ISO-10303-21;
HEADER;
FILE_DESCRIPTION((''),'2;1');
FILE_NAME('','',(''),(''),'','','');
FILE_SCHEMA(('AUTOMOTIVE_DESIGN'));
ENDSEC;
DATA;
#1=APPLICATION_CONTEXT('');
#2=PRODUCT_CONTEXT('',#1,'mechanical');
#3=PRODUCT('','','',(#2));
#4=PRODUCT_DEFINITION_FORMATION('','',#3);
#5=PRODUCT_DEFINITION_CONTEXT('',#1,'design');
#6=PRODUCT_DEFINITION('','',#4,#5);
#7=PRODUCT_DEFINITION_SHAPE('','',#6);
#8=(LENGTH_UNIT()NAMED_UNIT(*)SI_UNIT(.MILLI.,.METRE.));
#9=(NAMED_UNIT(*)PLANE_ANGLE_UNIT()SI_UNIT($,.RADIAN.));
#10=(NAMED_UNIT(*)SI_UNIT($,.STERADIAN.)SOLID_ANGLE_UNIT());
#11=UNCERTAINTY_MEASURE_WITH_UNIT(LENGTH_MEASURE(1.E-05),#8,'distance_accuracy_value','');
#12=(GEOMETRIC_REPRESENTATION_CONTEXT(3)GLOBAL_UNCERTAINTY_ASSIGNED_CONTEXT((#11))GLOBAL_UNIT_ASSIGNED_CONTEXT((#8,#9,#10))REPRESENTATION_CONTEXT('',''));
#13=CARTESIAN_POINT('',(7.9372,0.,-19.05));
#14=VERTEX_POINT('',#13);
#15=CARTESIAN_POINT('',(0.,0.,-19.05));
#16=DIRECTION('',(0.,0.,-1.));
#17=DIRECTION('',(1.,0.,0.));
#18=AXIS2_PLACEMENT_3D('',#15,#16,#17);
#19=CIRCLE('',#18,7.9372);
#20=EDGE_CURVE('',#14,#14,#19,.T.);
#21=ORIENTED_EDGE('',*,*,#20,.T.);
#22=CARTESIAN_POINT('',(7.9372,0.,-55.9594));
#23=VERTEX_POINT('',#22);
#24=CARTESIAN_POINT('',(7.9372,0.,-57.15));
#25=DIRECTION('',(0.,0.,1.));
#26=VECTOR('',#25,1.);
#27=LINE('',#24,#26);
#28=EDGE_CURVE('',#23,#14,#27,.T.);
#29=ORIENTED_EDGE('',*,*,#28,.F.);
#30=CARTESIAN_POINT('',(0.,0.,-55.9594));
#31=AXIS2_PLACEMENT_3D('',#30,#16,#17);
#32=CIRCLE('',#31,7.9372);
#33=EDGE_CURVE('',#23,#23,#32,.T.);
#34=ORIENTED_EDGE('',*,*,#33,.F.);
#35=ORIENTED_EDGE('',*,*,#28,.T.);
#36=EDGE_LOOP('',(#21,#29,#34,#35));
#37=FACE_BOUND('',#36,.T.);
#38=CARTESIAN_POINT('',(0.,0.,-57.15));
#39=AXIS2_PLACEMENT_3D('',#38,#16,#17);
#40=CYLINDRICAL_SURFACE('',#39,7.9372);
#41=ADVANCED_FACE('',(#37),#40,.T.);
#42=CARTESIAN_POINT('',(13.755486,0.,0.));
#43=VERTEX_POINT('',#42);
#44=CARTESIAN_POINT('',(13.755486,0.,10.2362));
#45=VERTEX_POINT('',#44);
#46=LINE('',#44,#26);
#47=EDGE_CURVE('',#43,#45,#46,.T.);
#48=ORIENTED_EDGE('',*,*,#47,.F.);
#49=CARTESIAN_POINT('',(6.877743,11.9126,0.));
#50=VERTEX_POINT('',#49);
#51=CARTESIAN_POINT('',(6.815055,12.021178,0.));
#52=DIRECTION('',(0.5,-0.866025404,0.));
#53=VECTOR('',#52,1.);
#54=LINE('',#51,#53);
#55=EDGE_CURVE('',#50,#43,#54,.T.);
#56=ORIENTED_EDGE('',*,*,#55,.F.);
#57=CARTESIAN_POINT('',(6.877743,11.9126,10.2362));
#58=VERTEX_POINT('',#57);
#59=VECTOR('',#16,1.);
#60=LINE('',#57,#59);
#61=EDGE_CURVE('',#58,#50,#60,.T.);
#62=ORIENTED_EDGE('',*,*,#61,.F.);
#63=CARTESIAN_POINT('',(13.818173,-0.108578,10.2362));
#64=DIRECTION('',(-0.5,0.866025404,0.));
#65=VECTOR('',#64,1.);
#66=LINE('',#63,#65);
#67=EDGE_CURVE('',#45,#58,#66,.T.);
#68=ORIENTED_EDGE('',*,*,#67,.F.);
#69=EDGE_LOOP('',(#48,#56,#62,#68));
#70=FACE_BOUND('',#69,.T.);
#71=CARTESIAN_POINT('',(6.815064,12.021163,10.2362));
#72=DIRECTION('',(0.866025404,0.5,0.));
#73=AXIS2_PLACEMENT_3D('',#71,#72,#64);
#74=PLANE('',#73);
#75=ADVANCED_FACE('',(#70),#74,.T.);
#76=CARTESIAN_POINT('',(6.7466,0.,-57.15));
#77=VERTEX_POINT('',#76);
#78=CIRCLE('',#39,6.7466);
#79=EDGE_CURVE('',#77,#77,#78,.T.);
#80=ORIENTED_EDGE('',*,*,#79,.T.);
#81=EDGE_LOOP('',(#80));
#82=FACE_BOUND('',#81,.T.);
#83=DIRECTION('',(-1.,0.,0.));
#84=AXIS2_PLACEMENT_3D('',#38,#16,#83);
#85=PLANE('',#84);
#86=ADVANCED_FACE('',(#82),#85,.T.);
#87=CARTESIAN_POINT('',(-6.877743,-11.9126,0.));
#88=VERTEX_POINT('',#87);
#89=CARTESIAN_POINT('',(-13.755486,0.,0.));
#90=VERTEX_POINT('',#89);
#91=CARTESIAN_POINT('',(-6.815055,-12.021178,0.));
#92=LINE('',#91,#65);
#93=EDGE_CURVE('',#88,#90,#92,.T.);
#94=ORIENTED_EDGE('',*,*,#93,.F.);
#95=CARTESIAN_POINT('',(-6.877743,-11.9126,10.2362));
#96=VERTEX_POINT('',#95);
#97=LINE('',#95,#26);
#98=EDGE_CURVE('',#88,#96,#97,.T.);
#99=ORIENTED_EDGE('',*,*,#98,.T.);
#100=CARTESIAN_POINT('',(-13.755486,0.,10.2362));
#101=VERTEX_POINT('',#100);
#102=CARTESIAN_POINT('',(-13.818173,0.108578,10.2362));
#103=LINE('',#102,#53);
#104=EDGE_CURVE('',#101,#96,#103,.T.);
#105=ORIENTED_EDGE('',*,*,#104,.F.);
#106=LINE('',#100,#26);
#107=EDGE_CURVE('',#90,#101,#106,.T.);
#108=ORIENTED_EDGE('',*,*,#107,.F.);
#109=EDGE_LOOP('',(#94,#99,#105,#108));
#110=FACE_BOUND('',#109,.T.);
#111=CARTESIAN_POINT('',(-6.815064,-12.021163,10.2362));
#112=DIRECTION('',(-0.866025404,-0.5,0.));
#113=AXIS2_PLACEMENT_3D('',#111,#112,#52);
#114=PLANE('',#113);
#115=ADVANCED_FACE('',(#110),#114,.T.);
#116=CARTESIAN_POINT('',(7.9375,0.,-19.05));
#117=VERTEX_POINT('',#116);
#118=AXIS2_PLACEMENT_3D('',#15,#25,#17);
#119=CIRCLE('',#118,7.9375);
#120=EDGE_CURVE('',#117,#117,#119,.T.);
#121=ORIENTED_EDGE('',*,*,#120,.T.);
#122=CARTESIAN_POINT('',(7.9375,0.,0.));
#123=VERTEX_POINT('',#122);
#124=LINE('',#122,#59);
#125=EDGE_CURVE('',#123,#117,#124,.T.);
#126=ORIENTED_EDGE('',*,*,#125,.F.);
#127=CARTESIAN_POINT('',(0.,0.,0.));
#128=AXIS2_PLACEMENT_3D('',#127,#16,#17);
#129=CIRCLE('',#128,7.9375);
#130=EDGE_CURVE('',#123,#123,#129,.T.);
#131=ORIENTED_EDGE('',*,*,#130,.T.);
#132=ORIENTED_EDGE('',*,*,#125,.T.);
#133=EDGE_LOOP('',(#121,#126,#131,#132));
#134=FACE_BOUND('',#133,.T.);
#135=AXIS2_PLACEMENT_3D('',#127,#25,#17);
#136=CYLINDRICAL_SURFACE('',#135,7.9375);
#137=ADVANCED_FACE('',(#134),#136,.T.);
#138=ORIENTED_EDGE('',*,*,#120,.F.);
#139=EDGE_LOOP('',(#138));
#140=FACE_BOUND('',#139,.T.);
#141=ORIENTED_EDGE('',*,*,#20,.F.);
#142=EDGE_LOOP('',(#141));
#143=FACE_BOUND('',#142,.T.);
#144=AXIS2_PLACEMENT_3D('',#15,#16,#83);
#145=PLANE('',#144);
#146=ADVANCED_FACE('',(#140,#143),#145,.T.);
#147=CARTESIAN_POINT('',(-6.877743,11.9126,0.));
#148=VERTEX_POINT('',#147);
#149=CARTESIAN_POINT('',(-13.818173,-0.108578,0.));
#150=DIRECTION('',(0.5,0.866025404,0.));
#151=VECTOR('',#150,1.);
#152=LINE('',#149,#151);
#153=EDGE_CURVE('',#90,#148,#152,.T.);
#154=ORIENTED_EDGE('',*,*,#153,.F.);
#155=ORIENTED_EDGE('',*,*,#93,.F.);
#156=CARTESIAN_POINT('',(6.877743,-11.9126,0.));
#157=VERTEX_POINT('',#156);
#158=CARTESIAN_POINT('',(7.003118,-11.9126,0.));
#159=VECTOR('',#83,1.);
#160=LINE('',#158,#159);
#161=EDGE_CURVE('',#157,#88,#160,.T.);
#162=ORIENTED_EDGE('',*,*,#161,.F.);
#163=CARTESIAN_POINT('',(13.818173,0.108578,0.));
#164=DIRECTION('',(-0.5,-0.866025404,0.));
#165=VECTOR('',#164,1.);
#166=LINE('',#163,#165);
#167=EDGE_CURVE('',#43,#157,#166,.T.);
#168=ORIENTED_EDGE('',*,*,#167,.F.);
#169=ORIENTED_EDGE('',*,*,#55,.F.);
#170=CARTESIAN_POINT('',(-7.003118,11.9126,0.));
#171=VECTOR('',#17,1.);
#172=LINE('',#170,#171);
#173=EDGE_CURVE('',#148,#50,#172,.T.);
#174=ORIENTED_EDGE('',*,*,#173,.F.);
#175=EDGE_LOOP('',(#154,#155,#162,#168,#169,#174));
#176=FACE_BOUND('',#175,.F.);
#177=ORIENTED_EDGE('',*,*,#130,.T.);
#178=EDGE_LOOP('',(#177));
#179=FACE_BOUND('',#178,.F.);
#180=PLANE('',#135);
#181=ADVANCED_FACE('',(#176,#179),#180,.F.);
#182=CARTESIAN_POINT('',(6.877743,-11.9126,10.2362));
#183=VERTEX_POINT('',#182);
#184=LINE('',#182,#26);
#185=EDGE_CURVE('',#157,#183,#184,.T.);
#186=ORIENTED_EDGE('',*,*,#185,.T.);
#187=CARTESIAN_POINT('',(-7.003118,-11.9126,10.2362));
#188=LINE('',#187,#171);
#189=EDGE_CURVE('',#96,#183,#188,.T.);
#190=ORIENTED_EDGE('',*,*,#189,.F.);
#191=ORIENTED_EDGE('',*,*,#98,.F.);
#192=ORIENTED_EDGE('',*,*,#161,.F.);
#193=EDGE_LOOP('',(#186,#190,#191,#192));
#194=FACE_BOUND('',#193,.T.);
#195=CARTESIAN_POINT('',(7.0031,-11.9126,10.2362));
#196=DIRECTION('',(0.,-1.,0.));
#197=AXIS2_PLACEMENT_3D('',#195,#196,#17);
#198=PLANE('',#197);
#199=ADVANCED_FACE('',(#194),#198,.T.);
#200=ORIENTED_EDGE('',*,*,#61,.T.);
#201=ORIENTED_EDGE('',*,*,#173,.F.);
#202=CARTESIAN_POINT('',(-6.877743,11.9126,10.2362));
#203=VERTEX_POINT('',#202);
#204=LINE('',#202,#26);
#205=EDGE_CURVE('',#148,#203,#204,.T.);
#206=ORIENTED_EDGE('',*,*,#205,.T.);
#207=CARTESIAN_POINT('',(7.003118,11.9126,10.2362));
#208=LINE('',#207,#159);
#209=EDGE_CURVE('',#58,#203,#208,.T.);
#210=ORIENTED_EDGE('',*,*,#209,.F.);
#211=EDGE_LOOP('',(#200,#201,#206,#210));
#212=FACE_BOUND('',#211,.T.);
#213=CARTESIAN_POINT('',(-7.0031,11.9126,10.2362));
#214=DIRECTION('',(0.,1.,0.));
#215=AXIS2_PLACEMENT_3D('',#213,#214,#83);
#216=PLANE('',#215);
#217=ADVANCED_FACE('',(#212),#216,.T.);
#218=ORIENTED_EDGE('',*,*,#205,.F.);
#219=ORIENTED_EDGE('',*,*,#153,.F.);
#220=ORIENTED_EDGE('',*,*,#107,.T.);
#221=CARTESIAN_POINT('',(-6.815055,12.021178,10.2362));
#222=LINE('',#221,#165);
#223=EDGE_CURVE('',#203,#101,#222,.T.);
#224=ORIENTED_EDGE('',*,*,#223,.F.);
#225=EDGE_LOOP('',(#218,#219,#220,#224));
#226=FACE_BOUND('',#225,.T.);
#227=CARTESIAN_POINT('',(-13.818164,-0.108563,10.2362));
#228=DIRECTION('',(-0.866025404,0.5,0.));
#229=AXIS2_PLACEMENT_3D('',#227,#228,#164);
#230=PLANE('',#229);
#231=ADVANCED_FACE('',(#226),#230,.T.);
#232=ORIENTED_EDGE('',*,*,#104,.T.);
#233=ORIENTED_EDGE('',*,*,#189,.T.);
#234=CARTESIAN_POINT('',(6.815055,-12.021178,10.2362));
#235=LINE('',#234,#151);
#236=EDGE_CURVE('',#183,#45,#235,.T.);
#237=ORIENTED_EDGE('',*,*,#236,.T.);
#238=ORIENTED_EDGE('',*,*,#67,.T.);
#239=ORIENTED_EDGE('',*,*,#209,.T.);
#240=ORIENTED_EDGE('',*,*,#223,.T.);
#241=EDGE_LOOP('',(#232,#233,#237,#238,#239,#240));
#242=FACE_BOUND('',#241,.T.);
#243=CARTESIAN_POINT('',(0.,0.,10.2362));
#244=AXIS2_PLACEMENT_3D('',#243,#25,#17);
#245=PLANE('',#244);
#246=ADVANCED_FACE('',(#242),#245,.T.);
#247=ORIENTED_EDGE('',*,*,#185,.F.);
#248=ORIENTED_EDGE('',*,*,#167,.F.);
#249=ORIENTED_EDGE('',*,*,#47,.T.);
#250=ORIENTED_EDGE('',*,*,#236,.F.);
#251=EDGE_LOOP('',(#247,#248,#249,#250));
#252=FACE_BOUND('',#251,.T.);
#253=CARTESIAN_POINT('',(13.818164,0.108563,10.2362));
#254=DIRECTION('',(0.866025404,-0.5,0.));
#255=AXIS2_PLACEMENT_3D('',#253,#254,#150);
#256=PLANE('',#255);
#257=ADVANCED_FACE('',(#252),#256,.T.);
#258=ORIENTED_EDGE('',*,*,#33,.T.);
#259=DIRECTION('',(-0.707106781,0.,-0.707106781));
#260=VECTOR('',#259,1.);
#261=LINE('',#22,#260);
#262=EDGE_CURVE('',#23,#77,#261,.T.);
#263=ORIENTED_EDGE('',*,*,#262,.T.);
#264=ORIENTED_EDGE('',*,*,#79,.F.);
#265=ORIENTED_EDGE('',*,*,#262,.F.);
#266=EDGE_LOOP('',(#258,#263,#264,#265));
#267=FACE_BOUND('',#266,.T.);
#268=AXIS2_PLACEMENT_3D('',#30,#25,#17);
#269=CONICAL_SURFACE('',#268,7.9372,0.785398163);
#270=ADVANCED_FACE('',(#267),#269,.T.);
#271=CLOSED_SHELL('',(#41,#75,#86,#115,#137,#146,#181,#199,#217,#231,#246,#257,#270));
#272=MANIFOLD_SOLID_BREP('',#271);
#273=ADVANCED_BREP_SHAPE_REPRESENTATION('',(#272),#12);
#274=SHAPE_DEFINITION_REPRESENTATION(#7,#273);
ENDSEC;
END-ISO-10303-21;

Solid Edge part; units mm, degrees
sketch "Sketch1" plane through (0, 0, 0) normal (0, 0, 1) x (1, 0, 0)
  circle A0 centre (0, 0) radius 13.8186
  dimension "D1" = 27.6372
extrude "Protrusion1" add sketch "Sketch1" along normal blind 10.2362
sketch "Sketch2" plane through (0, 0, 0) normal (0, 0, -1) x (1, 0, 0)
  circle A0 centre (0, 0) radius 7.9375
extrude "Protrusion2" add sketch "Sketch2" along normal blind 57.15
sketch "Sketch3" plane through (0, 0, -57.15) normal (0, 0, -1) x (1, 0, 0)
  circle A0 centre (0, 0) radius 7.9372
extrude "Cutout1" cut sketch "Sketch3" against normal blind 38.1 flip side to cut
chamfer "Chamfer_1" distance 1.1906 angle 45 1 edges at (-7.9372, 0, -57.15)
sketch "Sketch4" plane through (0, 0, 10.2362) normal (0, 0, 1) x (1, 0, 0)
  line L0 (-7.0031, 11.9126) -> (7.0031, 11.9126)
  dimension "D1" = 23.8252
extrude "Cutout2" cut sketch "Sketch4" against normal up to next material side at (0, 11.9626, 10.2362)
pattern_circular "Pattern1" count 6 over 360 about axis through (0, 0, 10.2362) along (0, 0, 1) of "Cutout2"
properties part number "24107285"
